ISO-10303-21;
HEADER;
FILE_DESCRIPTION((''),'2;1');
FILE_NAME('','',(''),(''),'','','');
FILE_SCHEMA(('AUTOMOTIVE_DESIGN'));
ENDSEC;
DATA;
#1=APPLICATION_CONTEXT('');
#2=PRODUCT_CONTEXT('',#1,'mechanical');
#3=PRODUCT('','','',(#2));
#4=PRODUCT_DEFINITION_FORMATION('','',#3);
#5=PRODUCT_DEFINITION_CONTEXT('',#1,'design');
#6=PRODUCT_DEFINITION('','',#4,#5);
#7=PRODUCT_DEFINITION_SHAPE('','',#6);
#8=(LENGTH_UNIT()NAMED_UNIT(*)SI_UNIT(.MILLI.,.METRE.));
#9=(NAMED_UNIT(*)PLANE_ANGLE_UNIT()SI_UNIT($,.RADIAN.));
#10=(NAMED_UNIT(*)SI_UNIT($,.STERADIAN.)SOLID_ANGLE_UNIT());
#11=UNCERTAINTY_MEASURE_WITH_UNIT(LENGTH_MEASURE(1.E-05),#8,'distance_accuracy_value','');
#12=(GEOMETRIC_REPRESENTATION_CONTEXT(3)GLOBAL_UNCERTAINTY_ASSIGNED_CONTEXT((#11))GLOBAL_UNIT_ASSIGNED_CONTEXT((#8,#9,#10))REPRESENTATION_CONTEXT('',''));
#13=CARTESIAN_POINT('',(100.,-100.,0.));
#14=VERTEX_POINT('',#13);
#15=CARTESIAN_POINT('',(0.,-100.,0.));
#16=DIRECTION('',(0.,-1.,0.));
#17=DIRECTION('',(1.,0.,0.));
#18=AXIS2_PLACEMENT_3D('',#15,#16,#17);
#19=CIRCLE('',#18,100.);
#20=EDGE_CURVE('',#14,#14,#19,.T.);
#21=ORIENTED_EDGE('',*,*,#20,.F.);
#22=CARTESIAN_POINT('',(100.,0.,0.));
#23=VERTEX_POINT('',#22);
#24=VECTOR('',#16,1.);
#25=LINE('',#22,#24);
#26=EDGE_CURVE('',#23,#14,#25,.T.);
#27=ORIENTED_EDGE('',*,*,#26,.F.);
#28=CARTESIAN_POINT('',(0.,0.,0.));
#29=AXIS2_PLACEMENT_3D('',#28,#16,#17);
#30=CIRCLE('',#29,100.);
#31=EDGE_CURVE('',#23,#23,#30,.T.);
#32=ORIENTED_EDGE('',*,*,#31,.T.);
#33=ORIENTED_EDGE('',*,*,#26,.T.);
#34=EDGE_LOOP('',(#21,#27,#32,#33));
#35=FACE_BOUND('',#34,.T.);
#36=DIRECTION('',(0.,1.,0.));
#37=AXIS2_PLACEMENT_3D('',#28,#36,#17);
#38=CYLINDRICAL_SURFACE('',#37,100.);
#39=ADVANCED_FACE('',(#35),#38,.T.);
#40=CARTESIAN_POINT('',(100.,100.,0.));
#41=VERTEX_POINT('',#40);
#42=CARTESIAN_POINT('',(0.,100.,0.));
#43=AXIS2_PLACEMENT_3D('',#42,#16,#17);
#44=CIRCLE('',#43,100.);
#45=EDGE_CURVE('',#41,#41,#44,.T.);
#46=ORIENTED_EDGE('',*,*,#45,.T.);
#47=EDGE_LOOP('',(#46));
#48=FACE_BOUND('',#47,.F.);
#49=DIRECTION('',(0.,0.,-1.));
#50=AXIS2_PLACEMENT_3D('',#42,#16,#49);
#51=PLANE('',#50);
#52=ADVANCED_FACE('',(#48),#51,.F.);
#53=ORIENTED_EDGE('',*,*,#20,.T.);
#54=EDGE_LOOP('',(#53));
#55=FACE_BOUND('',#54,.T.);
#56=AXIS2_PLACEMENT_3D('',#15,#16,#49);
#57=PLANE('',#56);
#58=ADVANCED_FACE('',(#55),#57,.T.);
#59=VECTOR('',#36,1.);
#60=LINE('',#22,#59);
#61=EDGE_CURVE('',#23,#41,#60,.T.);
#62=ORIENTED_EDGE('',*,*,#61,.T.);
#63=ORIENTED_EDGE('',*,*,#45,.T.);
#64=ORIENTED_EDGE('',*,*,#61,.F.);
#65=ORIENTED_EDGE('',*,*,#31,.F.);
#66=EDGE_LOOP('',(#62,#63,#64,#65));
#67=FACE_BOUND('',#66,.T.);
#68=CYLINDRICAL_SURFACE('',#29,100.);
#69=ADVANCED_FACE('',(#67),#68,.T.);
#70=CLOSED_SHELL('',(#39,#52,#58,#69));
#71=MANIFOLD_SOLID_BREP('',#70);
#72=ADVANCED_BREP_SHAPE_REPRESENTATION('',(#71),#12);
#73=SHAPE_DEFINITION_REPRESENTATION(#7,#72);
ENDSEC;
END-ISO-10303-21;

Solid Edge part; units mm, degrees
sketch "Sketch1" plane through (0, 0, 0) normal (0, -1, 0) x (1, 0, 0)
  circle A0 centre (0, 0) radius 100
  circle A1 centre (0, 0) radius 100
extrude "Protrusion1" add sketch "Sketch1" along normal mid plane 200
